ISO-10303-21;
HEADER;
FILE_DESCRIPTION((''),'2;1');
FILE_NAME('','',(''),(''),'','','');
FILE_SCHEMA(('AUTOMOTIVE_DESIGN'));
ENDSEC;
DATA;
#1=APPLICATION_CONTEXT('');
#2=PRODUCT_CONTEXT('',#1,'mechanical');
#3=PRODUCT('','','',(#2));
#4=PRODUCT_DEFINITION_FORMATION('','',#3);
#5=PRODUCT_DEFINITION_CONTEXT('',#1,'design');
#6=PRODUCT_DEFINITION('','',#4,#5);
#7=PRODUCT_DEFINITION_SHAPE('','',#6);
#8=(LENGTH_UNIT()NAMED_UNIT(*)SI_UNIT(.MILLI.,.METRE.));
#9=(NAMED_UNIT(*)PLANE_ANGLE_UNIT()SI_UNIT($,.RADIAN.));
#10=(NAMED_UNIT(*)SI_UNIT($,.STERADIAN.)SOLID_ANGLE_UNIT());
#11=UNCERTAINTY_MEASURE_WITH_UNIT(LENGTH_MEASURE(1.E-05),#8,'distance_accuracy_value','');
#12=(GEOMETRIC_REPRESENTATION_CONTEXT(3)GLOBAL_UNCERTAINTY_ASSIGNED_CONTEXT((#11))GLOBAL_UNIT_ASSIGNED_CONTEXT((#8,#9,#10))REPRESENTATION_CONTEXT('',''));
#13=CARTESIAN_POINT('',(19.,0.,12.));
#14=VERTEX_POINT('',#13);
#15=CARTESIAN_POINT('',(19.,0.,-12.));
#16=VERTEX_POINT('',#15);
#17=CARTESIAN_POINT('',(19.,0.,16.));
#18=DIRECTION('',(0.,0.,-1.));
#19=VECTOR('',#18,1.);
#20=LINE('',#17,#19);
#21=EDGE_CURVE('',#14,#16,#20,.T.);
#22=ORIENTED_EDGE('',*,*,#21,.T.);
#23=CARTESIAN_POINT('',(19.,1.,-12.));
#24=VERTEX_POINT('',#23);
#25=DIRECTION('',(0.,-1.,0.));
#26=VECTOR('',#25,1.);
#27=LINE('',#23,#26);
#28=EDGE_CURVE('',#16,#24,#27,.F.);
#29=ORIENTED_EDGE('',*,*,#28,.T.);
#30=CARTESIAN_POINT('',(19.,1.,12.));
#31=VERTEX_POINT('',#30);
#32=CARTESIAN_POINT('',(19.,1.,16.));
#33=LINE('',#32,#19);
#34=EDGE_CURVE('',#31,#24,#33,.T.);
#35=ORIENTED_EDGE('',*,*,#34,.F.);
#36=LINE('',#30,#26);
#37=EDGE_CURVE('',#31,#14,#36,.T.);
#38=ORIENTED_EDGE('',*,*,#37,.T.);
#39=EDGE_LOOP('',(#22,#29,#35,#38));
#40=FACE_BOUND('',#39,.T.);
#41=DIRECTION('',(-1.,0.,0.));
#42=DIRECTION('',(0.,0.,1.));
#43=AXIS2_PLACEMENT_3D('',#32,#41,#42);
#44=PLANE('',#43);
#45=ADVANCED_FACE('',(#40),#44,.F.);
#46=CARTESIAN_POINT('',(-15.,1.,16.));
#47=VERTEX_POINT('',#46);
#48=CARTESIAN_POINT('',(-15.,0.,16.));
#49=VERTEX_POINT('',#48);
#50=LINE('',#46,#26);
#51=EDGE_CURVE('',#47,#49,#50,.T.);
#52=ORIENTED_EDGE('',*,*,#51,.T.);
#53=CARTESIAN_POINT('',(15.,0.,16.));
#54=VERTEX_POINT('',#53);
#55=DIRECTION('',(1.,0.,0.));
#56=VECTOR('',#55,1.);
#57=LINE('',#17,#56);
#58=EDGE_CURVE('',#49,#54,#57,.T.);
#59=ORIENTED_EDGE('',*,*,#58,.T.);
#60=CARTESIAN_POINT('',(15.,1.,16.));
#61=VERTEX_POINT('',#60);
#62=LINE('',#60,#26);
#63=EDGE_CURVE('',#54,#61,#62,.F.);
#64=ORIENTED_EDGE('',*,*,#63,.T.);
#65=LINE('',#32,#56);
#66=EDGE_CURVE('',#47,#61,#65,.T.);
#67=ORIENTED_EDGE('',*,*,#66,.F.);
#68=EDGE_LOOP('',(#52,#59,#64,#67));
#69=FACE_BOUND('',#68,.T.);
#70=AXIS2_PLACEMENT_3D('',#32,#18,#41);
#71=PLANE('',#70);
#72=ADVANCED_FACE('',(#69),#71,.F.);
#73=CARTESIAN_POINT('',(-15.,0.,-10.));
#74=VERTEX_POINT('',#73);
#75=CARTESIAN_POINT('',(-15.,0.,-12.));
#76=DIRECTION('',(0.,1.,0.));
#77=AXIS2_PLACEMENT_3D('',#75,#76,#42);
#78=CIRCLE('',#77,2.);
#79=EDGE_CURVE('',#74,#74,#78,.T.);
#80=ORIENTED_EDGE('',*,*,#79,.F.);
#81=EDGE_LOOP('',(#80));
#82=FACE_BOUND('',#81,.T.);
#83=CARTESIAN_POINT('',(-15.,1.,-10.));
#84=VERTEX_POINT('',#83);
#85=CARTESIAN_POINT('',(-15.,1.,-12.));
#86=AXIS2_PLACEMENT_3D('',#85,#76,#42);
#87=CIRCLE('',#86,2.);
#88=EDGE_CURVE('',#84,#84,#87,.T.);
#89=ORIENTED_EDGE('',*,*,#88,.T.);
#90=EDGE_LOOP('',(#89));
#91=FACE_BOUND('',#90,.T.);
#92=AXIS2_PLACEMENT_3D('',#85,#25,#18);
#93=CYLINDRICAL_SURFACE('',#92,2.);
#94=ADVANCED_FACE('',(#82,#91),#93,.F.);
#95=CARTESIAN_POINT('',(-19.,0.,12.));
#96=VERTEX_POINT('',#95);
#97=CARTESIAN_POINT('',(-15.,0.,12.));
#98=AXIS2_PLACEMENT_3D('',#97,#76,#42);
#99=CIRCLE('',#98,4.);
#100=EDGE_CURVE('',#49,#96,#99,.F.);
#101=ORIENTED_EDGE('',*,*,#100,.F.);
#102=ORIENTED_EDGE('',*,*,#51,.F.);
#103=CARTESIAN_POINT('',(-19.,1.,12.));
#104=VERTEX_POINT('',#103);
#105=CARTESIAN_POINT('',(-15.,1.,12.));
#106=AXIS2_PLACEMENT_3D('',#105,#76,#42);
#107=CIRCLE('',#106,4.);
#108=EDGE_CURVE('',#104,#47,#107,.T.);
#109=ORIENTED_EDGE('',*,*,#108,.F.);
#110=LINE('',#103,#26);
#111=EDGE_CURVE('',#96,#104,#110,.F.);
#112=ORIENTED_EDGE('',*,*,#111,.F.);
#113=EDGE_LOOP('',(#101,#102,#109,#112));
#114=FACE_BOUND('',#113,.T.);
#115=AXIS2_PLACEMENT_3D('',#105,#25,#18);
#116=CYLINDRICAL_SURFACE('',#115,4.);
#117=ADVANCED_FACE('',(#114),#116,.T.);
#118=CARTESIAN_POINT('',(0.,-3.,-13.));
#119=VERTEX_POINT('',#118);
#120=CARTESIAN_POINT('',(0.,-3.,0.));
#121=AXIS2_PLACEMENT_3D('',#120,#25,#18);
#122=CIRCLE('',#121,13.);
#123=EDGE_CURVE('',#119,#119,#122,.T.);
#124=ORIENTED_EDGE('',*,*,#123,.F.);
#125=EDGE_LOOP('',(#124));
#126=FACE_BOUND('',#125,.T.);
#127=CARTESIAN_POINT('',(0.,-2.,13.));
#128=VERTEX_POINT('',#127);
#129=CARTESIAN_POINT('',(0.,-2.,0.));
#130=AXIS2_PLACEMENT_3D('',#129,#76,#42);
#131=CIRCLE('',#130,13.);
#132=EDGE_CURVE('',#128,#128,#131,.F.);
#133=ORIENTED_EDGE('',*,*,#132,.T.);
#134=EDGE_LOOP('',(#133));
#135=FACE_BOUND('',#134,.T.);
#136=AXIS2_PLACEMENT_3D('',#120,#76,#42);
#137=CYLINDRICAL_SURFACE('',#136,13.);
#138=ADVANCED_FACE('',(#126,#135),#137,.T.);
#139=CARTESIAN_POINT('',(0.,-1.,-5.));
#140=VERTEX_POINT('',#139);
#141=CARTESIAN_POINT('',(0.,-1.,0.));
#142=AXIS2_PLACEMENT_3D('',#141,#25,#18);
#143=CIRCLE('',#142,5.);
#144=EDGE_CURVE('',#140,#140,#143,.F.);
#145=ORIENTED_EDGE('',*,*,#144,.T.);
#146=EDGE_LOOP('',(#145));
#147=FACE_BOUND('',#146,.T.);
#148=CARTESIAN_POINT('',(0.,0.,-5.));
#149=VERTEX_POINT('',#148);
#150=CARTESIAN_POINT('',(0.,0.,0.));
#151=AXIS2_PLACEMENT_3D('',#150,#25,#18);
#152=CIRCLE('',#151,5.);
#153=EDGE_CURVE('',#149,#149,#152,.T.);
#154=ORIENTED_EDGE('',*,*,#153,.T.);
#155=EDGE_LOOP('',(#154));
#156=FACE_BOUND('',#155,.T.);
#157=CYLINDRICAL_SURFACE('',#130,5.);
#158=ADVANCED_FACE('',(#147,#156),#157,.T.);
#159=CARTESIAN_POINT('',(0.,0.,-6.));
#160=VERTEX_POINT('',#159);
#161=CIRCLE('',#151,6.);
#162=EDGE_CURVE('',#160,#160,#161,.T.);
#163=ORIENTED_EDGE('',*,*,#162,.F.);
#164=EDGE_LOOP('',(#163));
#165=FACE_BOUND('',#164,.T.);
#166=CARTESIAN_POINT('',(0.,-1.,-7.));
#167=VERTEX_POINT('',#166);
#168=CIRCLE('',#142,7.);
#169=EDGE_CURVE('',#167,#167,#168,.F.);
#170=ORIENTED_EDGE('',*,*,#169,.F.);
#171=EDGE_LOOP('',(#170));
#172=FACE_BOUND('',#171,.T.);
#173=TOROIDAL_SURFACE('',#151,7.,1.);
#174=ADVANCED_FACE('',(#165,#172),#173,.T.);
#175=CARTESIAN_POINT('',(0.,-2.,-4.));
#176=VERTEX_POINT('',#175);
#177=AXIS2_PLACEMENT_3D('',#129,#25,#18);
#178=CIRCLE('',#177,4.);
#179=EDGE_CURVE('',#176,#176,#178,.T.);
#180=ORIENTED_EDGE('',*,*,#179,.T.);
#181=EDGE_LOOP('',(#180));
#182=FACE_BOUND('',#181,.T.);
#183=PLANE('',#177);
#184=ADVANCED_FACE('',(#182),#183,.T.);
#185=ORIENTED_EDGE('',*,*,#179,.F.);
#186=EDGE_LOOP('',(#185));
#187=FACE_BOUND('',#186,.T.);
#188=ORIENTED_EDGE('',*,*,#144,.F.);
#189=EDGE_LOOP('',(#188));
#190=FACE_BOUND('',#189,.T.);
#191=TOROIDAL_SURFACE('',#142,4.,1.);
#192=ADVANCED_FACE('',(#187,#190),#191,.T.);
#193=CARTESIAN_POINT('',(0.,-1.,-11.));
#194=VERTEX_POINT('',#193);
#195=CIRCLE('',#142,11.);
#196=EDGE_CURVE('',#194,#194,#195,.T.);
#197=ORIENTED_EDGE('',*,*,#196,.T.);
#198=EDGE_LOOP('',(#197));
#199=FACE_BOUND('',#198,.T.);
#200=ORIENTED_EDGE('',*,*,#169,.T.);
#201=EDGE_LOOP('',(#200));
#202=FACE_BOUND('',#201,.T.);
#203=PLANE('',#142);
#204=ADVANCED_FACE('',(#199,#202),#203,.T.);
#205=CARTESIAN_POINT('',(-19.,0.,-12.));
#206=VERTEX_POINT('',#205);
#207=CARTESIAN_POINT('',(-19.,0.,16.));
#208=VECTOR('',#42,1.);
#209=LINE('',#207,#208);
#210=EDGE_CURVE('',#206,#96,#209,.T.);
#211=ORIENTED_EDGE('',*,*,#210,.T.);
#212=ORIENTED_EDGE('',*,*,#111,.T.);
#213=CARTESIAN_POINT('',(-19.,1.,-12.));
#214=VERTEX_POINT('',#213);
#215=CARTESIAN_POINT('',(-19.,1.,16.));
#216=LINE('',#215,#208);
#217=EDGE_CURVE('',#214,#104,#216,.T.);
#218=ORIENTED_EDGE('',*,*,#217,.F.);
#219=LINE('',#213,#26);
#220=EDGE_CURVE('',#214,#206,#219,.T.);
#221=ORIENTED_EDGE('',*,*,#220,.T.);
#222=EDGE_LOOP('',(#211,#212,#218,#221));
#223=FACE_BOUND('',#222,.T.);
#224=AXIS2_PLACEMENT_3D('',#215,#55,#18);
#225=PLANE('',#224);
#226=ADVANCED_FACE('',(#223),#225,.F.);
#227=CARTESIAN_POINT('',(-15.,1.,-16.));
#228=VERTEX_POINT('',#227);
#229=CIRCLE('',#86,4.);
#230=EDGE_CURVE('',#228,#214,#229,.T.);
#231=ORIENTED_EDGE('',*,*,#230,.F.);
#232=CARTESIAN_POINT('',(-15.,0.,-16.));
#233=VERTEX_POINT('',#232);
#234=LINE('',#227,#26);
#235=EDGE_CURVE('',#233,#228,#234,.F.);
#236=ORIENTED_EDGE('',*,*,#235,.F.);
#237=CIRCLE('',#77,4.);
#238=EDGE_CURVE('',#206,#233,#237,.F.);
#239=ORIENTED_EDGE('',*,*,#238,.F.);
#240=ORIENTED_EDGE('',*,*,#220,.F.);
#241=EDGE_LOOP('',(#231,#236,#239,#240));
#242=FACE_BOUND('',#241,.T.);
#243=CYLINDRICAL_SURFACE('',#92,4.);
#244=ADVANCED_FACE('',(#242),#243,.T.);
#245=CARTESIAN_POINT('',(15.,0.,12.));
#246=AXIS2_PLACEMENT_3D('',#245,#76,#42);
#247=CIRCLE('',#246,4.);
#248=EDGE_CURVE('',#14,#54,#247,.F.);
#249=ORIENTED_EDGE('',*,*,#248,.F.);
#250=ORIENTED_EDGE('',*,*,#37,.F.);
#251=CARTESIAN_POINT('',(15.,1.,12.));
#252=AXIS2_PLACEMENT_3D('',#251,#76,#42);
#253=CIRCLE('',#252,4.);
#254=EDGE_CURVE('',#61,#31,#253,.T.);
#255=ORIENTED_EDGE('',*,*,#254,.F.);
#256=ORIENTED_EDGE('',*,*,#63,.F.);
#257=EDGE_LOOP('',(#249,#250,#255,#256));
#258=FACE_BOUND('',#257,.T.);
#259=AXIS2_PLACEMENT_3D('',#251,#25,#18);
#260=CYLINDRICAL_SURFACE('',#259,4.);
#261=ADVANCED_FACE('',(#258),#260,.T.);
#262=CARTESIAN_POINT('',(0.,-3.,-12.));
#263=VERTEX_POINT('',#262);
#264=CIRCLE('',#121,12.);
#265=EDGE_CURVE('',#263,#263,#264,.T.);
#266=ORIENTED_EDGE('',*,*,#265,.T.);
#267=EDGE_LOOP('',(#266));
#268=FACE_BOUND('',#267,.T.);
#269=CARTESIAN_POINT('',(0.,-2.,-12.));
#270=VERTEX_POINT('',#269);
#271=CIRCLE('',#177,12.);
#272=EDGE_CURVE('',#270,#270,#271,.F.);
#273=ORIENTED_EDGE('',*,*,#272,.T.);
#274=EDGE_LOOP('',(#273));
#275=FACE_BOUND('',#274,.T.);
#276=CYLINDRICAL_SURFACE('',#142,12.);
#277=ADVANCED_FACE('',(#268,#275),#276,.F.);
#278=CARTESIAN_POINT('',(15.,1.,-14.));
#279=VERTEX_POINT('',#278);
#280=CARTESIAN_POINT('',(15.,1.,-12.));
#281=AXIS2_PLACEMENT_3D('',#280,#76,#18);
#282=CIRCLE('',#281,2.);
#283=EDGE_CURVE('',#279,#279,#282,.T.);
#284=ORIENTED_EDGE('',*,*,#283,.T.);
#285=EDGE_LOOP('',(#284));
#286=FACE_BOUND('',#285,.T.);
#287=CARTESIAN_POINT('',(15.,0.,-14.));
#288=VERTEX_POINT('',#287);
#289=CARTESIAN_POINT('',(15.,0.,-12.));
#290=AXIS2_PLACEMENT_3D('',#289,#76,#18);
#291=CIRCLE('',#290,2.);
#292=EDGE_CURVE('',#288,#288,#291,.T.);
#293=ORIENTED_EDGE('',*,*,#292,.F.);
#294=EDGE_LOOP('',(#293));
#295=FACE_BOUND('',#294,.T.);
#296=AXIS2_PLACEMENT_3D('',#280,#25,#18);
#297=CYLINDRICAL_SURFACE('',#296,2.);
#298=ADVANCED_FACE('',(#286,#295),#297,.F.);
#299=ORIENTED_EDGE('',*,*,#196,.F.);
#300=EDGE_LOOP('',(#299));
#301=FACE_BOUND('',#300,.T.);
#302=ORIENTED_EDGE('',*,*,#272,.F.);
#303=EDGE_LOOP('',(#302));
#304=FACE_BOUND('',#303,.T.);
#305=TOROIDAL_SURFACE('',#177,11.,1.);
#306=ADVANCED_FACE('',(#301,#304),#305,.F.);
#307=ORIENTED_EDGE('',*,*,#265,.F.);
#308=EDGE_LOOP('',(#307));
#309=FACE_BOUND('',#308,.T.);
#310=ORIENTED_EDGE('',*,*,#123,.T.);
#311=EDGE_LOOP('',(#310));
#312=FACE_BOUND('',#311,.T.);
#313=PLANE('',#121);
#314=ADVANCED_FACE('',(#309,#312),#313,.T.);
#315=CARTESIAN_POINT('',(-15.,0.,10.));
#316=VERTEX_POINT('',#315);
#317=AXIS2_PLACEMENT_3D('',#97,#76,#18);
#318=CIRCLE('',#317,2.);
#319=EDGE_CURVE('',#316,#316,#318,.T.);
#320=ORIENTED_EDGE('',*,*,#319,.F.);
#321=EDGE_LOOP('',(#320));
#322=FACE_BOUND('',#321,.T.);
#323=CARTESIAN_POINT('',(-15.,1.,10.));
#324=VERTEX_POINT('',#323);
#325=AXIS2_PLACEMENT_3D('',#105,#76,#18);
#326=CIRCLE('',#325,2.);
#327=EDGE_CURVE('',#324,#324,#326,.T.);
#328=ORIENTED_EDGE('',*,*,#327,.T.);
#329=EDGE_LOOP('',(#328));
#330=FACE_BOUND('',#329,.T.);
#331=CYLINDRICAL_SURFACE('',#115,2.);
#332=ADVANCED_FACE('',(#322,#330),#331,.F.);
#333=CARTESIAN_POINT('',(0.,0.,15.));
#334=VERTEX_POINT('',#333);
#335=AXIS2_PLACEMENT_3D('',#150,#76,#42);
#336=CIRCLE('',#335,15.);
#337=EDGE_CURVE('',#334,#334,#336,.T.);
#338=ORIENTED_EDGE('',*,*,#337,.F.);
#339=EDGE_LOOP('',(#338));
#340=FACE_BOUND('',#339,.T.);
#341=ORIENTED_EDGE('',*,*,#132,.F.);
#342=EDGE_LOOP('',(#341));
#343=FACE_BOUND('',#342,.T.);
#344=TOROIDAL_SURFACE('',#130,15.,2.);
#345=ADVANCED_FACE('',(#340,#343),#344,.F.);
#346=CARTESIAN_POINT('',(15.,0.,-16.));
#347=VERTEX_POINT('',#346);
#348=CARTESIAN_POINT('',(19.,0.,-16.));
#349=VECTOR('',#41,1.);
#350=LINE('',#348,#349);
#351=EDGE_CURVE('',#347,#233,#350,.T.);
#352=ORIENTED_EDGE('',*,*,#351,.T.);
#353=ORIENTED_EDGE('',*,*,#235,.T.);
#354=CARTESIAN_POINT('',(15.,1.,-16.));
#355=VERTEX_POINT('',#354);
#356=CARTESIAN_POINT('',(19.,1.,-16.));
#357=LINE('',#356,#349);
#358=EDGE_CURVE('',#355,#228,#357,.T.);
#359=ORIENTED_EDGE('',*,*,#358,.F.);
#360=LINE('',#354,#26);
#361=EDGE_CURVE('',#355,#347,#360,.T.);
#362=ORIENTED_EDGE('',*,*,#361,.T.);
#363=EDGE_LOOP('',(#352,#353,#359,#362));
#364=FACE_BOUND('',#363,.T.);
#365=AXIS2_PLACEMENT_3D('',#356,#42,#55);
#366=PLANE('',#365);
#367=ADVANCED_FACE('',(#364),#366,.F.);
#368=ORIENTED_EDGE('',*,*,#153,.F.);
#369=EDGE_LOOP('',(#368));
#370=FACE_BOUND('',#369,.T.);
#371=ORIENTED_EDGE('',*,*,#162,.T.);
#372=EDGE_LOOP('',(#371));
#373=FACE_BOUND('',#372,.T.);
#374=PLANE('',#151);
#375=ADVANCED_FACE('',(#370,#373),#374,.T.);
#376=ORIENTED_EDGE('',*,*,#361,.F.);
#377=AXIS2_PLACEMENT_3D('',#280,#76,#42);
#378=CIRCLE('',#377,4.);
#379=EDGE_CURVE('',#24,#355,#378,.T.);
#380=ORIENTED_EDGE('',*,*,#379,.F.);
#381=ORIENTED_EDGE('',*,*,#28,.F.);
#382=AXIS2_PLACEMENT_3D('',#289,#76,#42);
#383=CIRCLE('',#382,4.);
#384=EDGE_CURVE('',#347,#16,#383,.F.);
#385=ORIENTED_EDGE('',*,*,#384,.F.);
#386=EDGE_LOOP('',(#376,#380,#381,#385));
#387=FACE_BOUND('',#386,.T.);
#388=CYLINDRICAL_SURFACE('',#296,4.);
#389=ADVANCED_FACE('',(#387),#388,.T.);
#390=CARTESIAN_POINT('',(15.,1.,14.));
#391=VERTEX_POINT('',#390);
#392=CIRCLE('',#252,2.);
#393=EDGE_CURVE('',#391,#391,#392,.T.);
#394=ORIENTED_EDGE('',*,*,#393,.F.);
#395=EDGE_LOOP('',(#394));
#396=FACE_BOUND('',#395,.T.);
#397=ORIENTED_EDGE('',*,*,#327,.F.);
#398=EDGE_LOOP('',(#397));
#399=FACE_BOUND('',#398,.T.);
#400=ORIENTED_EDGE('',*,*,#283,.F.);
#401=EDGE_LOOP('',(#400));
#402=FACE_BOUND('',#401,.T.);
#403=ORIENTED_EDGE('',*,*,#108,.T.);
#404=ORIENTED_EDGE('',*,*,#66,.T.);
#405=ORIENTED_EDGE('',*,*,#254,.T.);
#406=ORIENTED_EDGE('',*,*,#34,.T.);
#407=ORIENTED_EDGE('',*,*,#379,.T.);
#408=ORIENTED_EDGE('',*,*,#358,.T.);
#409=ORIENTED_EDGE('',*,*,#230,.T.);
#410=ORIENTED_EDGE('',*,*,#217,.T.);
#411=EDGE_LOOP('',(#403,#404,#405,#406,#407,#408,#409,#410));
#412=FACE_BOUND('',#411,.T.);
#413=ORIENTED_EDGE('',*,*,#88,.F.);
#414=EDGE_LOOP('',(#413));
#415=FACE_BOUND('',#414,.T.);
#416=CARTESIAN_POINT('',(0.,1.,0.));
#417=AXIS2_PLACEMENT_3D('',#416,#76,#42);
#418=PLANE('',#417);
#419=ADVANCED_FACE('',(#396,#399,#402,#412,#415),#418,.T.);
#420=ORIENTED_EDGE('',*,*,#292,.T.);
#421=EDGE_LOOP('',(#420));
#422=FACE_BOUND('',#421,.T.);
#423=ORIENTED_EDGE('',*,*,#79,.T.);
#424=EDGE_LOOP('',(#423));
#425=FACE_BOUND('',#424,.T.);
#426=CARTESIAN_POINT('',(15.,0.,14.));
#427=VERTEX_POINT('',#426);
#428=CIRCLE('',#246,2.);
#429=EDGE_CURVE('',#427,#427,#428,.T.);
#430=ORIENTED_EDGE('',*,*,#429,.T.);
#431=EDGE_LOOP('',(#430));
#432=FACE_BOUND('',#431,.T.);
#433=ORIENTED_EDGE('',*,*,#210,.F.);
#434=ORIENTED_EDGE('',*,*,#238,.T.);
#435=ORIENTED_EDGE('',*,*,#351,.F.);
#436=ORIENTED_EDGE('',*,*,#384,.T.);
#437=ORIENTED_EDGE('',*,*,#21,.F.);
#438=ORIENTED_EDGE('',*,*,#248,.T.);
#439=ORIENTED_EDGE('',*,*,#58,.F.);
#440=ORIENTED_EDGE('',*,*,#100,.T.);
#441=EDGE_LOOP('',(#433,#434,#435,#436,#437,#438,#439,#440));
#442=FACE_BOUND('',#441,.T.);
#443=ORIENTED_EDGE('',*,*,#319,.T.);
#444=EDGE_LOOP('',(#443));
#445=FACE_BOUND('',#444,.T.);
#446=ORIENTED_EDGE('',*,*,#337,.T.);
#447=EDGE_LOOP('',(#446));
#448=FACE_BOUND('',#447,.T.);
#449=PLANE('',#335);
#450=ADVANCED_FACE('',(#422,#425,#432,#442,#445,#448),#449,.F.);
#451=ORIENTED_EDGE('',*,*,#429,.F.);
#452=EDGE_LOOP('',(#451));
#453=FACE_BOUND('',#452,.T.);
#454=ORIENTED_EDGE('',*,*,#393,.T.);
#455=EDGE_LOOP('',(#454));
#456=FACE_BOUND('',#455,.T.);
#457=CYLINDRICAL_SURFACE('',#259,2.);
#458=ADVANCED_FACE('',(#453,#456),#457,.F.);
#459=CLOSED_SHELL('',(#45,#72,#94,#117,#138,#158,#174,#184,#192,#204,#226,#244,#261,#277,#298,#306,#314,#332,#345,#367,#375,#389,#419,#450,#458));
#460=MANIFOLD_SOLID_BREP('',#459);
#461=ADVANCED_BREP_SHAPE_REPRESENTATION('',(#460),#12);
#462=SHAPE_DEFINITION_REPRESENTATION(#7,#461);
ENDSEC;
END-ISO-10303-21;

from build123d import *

# Parameters (mm, degrees)
SKETCH2_W           = 38
SKETCH2_H           = 32
SKETCH2_R           = 2
BOSS_EXTRUDE1_DEPTH = 1
FILLET1_R           = 4
SKETCH3_R           = 13
BOSS_EXTRUDE2_DEPTH = 3
SKETCH4_R           = 12
CUT_EXTRUDE1_DEPTH  = 2
FILLET2_R           = 2
SKETCH5_R           = 6
CUT_EXTRUDE4_DEPTH  = 1
SKETCH11_R          = 5
BOSS_EXTRUDE5_DEPTH = 2
FILLET7_R           = 1


with BuildPart() as part:
    # Sketch2 → Boss-Extrude1 (new body)
    with BuildSketch(Plane(origin=(0, 0, 0), x_dir=(1, 0, 0), z_dir=(0, 1, 0))):
        Rectangle(SKETCH2_W, SKETCH2_H)
        with Locations(Location((-15, 12, 0), (0, 0, 270))):
            Circle(SKETCH2_R, mode=Mode.SUBTRACT)
        with Locations(Location((15, 12, 0), (0, 0, 90))):
            Circle(SKETCH2_R, mode=Mode.SUBTRACT)
        with Locations(Location((15, -12, 0), (0, 0, 270))):
            Circle(SKETCH2_R, mode=Mode.SUBTRACT)
        with Locations(Location((-15, -12, 0), (0, 0, 90))):
            Circle(SKETCH2_R, mode=Mode.SUBTRACT)
    extrude(amount=BOSS_EXTRUDE1_DEPTH)

    # Fillet1
    fillet1_edges = [part.edges().sort_by_distance(p)[0] for p in [
        (-19, 0.5, -16),
        (19, 0.5, -16),
        (19, 0.5, 16),
        (-19, 0.5, 16),
    ]]
    fillet(fillet1_edges, radius=FILLET1_R)

    # Sketch3 → Boss-Extrude2 (add)
    with BuildSketch(Plane.XZ):
        with Locations(Location((0, 0, 0), (0, 0, 270))):
            Circle(SKETCH3_R)
    extrude(amount=BOSS_EXTRUDE2_DEPTH)

    # Sketch4 → Cut-Extrude1 (cut)
    with BuildSketch(Plane.XZ.offset(3)):
        with Locations(Location((0, 0, 0), (0, 0, 270))):
            Circle(SKETCH4_R)
    extrude(amount=-CUT_EXTRUDE1_DEPTH, mode=Mode.SUBTRACT)

    # Fillet2
    fillet2_edges = [part.edges().sort_by_distance(p)[0] for p in [
        (0, 0, 13),
    ]]
    fillet(fillet2_edges, radius=FILLET2_R)

    # Sketch5 → Cut-Extrude4 (cut)
    with BuildSketch(Plane.XZ.offset(1)):
        with Locations(Location((0, 0, 0), (0, 0, 270))):
            Circle(SKETCH5_R)
    extrude(amount=-CUT_EXTRUDE4_DEPTH, mode=Mode.SUBTRACT)

    # Sketch11 → Boss-Extrude5 (add)
    with BuildSketch(Plane.XZ):
        with Locations(Location((0, 0, 0), (0, 0, 270))):
            Circle(SKETCH11_R)
    extrude(amount=BOSS_EXTRUDE5_DEPTH)

    # Fillet7
    fillet7_edges = [part.edges().sort_by_distance(p)[0] for p in [
        (0, -1, 12),
        (0, -1, 6),
        (0, -2, 5),
    ]]
    fillet(fillet7_edges, radius=FILLET7_R - 0.0001)  # a hair under: the kernel refuses the full size


solid = part.part
